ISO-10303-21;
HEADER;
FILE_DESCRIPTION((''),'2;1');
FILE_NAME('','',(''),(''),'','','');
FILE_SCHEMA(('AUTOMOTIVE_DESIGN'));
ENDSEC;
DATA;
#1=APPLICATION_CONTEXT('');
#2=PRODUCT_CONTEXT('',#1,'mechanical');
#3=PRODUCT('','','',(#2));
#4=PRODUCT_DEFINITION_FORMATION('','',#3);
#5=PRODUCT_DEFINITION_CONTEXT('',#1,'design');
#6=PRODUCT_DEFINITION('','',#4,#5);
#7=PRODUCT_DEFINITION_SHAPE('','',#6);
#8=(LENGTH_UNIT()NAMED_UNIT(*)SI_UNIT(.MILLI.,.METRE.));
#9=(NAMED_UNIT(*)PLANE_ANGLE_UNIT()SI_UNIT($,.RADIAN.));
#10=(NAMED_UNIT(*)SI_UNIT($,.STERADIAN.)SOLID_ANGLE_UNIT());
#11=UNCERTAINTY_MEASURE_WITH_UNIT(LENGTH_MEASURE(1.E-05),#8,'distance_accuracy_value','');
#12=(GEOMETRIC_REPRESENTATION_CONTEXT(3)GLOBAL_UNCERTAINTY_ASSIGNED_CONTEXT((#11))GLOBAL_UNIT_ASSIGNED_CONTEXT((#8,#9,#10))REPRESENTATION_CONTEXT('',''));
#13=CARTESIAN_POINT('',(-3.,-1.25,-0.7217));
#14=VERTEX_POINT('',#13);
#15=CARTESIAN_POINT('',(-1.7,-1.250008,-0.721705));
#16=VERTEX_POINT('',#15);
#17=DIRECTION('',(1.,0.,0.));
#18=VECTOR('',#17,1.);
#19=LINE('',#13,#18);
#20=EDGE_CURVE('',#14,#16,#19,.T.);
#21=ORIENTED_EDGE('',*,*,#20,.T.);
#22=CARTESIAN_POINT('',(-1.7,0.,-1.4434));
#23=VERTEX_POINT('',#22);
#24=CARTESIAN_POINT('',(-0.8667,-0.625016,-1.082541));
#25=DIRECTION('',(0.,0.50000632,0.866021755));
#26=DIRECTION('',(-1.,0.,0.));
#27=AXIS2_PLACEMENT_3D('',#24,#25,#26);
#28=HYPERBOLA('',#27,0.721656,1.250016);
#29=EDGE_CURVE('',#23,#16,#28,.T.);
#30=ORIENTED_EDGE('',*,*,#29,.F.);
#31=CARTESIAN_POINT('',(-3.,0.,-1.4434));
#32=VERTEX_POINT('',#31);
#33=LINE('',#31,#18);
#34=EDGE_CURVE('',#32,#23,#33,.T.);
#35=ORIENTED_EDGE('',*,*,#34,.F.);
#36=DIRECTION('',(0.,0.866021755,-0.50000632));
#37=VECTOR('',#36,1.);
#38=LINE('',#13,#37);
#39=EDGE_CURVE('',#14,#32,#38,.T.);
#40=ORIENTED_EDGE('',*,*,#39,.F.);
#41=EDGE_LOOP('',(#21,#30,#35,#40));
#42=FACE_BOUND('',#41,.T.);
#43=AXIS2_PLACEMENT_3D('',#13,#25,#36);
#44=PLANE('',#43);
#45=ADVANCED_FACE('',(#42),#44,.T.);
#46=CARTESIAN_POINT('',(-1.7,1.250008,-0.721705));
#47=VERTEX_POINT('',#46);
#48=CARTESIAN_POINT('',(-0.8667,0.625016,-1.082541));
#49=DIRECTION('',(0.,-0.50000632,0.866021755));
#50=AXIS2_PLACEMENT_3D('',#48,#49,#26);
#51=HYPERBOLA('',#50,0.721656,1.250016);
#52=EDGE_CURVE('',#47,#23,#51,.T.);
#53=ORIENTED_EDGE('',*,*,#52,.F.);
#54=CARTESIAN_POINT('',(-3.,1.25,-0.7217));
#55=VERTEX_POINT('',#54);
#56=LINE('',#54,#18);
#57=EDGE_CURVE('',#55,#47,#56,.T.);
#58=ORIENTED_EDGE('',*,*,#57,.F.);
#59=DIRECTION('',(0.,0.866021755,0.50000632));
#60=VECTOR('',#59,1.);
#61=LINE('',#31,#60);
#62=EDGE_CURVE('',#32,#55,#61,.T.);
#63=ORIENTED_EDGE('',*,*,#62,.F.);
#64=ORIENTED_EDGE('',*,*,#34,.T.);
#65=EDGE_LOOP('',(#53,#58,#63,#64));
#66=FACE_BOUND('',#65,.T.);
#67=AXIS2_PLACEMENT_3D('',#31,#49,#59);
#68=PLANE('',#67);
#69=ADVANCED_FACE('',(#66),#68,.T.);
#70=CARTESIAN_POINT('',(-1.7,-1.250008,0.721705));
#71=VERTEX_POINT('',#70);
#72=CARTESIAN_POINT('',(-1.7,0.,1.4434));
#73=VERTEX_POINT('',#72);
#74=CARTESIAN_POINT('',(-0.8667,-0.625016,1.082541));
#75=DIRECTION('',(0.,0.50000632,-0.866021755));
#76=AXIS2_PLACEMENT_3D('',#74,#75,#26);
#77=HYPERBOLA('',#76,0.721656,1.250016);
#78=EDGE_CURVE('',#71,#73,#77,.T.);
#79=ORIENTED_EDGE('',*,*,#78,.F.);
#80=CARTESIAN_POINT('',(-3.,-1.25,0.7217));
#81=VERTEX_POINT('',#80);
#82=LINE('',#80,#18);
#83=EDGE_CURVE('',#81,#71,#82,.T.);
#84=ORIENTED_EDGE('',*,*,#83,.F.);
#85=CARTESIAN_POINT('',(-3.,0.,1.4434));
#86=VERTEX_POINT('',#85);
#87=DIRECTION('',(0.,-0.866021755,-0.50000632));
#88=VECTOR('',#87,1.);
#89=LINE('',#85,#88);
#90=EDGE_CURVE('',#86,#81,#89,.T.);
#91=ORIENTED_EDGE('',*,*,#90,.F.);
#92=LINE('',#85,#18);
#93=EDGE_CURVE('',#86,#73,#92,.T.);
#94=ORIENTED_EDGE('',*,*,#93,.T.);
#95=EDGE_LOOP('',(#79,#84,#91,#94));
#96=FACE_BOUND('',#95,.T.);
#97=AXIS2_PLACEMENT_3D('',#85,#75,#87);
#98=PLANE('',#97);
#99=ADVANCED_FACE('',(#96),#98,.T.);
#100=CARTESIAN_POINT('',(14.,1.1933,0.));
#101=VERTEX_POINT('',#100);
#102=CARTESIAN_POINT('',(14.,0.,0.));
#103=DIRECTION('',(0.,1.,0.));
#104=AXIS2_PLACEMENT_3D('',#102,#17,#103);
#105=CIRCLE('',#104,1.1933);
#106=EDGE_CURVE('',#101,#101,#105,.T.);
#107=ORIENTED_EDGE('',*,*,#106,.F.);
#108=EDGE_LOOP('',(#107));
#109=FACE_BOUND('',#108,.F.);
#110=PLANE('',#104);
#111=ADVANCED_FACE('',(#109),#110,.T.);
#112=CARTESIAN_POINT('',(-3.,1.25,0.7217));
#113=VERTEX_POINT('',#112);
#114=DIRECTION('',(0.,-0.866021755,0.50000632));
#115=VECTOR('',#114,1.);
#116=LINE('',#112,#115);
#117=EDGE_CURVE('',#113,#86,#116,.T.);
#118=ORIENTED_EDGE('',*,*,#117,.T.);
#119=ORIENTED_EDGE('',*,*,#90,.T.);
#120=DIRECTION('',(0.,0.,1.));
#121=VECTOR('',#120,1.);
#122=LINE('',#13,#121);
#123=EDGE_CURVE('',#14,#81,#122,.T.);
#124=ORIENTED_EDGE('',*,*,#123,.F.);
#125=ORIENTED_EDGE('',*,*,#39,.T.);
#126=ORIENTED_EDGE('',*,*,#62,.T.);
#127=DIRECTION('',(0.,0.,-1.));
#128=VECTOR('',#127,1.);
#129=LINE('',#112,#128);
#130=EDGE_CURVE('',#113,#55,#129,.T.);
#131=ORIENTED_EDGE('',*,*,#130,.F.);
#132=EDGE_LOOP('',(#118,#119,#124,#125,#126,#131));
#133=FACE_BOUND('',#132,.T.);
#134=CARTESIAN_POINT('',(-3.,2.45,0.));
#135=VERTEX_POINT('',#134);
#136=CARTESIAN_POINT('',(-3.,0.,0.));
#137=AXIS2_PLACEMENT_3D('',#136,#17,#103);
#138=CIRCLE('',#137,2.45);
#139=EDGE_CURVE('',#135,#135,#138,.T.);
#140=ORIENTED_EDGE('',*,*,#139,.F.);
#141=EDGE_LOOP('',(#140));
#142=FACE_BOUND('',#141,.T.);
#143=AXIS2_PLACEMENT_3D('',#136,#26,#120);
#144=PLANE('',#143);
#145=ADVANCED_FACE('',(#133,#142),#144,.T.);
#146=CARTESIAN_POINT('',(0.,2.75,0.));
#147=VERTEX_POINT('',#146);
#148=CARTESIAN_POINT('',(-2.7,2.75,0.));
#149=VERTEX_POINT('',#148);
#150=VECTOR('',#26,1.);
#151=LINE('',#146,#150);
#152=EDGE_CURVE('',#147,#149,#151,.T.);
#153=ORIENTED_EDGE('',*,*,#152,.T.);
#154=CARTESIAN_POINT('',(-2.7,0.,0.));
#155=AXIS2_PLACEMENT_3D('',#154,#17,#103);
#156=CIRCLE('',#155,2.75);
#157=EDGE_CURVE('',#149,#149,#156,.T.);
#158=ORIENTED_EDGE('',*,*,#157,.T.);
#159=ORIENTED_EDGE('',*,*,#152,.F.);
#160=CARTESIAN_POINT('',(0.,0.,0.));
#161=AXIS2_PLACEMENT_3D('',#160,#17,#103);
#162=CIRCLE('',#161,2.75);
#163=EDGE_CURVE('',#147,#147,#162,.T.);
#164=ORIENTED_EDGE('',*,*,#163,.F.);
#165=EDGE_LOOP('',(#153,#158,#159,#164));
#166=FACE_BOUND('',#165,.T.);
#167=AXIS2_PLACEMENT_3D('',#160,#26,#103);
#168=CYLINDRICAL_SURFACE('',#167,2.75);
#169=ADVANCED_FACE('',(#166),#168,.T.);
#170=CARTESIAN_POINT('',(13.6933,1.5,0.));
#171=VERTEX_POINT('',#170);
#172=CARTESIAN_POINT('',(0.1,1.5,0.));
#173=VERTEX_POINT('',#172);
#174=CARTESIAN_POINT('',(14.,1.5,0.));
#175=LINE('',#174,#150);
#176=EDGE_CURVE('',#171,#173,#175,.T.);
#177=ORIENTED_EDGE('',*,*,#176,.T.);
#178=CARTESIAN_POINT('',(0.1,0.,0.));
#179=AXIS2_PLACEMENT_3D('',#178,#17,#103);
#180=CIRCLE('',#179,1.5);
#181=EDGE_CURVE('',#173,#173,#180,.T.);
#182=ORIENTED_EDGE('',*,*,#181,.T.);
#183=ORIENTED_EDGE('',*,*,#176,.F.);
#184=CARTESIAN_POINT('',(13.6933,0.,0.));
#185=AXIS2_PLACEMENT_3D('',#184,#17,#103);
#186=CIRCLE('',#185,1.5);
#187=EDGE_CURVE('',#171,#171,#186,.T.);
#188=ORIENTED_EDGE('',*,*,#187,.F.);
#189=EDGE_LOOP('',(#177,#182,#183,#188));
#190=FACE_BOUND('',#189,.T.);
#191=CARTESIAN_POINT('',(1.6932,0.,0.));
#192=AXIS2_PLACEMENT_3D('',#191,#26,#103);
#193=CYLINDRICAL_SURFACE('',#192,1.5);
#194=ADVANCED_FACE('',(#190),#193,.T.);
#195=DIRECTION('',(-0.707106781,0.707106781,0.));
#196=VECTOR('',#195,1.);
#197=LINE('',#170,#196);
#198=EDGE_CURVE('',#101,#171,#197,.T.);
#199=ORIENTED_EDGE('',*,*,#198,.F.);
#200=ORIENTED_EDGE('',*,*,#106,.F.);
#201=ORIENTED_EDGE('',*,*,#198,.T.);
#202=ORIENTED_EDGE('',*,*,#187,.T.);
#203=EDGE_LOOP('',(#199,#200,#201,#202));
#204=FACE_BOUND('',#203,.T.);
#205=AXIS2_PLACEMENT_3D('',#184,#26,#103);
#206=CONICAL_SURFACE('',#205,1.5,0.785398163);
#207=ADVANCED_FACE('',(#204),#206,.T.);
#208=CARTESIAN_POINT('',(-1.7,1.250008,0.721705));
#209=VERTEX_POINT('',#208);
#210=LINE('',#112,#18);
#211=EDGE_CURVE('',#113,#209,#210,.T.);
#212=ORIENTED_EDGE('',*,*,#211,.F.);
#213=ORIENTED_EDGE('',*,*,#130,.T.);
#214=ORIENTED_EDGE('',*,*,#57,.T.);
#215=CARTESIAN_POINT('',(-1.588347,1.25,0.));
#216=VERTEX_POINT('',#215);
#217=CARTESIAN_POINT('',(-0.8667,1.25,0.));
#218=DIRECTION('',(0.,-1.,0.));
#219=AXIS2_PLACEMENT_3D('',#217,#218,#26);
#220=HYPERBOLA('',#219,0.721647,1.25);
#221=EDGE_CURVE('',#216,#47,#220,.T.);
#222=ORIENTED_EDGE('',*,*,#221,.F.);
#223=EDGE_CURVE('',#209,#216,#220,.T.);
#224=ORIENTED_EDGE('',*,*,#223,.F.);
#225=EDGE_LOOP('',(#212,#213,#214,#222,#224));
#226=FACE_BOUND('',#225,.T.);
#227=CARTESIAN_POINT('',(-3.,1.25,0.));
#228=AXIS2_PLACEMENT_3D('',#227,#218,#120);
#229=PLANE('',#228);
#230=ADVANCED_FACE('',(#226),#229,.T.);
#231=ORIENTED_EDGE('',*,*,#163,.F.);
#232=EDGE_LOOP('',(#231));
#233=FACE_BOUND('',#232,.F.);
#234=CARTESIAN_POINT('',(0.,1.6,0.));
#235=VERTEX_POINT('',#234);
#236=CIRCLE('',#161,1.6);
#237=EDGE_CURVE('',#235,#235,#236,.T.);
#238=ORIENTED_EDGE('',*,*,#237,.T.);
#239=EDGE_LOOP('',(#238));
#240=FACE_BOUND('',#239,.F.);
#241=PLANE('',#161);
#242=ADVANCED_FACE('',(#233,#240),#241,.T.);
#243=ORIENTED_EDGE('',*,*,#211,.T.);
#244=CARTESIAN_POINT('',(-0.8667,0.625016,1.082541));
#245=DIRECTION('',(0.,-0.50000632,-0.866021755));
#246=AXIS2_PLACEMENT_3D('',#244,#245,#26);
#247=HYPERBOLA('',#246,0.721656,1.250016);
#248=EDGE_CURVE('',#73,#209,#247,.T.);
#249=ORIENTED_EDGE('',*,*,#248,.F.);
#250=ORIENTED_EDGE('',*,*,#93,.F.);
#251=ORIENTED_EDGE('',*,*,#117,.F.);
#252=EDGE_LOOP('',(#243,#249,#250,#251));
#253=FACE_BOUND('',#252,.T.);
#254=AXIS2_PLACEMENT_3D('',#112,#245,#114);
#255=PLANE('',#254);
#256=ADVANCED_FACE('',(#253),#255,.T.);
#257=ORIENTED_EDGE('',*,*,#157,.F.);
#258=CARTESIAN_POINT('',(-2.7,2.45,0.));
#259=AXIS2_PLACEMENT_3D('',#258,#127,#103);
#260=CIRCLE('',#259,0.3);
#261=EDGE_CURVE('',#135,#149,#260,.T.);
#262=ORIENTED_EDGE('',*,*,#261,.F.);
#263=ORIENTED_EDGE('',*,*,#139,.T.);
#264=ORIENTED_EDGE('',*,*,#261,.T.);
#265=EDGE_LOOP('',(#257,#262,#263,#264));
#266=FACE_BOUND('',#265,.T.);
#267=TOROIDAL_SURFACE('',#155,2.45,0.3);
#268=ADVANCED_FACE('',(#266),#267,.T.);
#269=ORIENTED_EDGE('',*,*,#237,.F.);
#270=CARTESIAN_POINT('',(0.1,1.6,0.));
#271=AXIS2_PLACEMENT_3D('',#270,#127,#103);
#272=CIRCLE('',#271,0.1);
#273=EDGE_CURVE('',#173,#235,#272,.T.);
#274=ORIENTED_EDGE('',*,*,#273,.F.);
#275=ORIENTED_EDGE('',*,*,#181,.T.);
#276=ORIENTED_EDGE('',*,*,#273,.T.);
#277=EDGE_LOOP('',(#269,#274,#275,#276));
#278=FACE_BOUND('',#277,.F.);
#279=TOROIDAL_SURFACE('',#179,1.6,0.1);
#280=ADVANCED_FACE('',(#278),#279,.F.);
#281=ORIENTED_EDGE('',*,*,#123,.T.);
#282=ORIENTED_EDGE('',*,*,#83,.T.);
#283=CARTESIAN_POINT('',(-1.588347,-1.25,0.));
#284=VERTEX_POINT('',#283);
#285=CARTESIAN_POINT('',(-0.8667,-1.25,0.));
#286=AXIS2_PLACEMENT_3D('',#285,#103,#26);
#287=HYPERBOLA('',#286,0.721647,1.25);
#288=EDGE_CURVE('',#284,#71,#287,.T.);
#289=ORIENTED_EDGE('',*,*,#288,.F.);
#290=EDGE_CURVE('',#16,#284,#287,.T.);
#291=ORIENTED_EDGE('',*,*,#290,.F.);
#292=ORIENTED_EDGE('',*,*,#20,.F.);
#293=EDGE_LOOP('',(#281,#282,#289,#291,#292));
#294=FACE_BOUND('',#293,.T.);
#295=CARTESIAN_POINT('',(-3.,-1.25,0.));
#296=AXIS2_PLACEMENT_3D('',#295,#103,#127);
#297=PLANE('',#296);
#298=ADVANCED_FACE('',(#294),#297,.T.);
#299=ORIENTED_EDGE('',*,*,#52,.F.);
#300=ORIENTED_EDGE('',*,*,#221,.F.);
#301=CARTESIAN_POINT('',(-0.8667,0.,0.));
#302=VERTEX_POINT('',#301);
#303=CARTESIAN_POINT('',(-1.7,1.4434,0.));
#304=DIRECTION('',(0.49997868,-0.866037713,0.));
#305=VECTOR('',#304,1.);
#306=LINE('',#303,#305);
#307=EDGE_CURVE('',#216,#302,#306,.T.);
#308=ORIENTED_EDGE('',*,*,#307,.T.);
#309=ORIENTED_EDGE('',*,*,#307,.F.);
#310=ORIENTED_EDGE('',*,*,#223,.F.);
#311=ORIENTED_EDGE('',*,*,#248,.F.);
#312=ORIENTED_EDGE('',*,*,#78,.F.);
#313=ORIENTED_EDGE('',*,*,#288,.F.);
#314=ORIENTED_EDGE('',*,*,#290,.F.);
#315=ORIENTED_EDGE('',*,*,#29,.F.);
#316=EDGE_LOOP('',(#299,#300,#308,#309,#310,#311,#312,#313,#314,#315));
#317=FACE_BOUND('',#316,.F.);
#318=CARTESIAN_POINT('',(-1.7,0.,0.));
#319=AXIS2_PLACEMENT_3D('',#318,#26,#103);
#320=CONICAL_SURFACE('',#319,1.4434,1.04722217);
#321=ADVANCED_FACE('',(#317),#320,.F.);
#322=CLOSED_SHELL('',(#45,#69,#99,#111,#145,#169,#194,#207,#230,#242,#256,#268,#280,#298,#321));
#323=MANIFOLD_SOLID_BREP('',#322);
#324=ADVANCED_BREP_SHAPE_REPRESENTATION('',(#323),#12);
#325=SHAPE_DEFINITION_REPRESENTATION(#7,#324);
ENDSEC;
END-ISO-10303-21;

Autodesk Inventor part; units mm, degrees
ref_plane "YZ Plane" through (0, 0, 0) normal (1, 0, 0) x (0, 1, 0)
ref_plane "XZ Plane" through (0, 0, 0) normal (0, 1, 0) x (-1, 0, 0)
sketch "Sketch1" plane through (0, 0, 0) normal (0, 0, 1) x (1, 0, 0)
  line L0 (-0.8667, 0) -> (14, 0)
  line L1 (14, 0) -> (14, 1.5)
  line L2 (14, 1.5) -> (2, 1.5)
  line L3 (2, 1.5) -> (1.6932, 1.5)
  line L4 (1.6932, 1.5) -> (0, 1.5)
  line L5 (0, 1.5) -> (0, 2.75)
  line L6 (0, 2.75) -> (-3, 2.75)
  line L7 (-3, 2.75) -> (-3, 1.4434)
  line L8 (-3, 1.4434) -> (-1.7, 1.4434)
  line L9 (-1.7, 1.4434) -> (-0.8667, 0)
  line L10 (-6.4, 0) -> (17.4, 0) projected
  line L11 (0, -0.55) -> (0, 3.3) projected
  line L12 (2, 1.5) -> (0, 1.5) construction
  dimension "d1" = 12
  dimension "d2" = 0.3068
  dimension "d3" = 3
  dimension "d4" = 1.3
  dimension "d5" = 60
  dimension "d6" = 3
  dimension "d7" = 3
  dimension "d8" = 2.8868
  dimension "d9" = 5.5
  dimension "d26" = 14
revolve "Body" add sketch "Sketch1" angle 360 about axis through (-0.8667, 0, 0) along (1, 0, 0)
sketch "Sketch2" plane through (-3, 0, 0) normal (-1, 0, 0) x (0, 0, 1)
  circle A0 centre (0, 0) radius 1.4434 projected
  line L0 (0, -3.85) -> (0, 3.85) projected
  line L1 (-3.85, 0) -> (3.85, 0) projected
  line L2 (1.4434, 0) -> (0.7217, -1.25)
  line L3 (0.7217, -1.25) -> (-0.7217, -1.25)
  line L4 (-0.7217, -1.25) -> (-1.4434, 0)
  line L5 (-1.4434, 0) -> (-0.7217, 1.25)
  line L6 (-0.7217, 1.25) -> (0.7217, 1.25)
  line L7 (0.7217, 1.25) -> (1.4434, 0)
extrude "Slot" add sketch "Sketch2" against normal up to next contours L7 A0 | A0 L2 | L6 L0 A0 | A0 L0 L3 | L0 L6 A0 | A0 L3 L0 | L4 A0 | A0 L5
fillet "Fillet1" radius 0.3 1 edges at (-3, -2.75, 0)
thread "Thread" size "M3x0.5" class "6g" standard "ISO Metric profile" length 12
chamfer "Chamfer1" distance 0.3067 distance2 0.3067 1 edges at (14, -1.5, 0) measured on face at (14, -0.6587, -0.1791)
ref_plane "Work Plane1" through (29, 0, 0) normal (0, -1, 0) x (1, 0, 0)
fillet "Fillet2" radius 0.1 1 edges at (0, -1.5, 0)
equation "\"d30\" = R"
equation "\"d17\" = RR"
equation "\"d13\" = GEL"
equation "\"d15\" = -0.5 * SPD + 0.5 * GD"
equation "\"d16\" = GUL"
equation "\"d1\" = GEL"
equation "\"d3\" = KOH"
equation "\"d4\" = INTI"
equation "\"d6\" = GD"
equation "\"d7\" = BDM"
equation "\"d8\" = 1.1547 * SW"
equation "\"d9\" = KOD"
equation "\"d26\" = NLG"
equation "\"GD\" = NND"
equation "\"NLG\" = 14"
equation "\"GEL\" = 12"
equation "\"KOD\" = 5.5"
equation "\"KOH\" = NND"
equation "\"INTI\" = 1.3"
equation "\"GAL\" = 0.61345 * PTC"
equation "\"GUL\" = 0.61345 * PTC"
equation "\"BDM\" = NND"
equation "\"SW\" = 2.5"
equation "\"RR\" = 0.1 * NND"
equation "\"SPD\" = NND - 1.2269 * PTC"
equation "\"R\" = 0.1"
equation "\"PHH\" = 0.13"
equation "\"GD1\" = THREADDIA - 1.2269 * PTC"
equation "\"THREADDIA\" = 3"
equation "\"FAWI\" = 45deg"
equation "\"PTC\" = 0.5"
equation "\"KOH1\" = 2.7"
equation "\"NND\" = 3"
equation "\"TOA\" = 30deg"
equation "\"E0\" = 1.155 * SW"
properties part number "AS 1420 - 1973 - M3 x 14" material "Steel, Mild"
